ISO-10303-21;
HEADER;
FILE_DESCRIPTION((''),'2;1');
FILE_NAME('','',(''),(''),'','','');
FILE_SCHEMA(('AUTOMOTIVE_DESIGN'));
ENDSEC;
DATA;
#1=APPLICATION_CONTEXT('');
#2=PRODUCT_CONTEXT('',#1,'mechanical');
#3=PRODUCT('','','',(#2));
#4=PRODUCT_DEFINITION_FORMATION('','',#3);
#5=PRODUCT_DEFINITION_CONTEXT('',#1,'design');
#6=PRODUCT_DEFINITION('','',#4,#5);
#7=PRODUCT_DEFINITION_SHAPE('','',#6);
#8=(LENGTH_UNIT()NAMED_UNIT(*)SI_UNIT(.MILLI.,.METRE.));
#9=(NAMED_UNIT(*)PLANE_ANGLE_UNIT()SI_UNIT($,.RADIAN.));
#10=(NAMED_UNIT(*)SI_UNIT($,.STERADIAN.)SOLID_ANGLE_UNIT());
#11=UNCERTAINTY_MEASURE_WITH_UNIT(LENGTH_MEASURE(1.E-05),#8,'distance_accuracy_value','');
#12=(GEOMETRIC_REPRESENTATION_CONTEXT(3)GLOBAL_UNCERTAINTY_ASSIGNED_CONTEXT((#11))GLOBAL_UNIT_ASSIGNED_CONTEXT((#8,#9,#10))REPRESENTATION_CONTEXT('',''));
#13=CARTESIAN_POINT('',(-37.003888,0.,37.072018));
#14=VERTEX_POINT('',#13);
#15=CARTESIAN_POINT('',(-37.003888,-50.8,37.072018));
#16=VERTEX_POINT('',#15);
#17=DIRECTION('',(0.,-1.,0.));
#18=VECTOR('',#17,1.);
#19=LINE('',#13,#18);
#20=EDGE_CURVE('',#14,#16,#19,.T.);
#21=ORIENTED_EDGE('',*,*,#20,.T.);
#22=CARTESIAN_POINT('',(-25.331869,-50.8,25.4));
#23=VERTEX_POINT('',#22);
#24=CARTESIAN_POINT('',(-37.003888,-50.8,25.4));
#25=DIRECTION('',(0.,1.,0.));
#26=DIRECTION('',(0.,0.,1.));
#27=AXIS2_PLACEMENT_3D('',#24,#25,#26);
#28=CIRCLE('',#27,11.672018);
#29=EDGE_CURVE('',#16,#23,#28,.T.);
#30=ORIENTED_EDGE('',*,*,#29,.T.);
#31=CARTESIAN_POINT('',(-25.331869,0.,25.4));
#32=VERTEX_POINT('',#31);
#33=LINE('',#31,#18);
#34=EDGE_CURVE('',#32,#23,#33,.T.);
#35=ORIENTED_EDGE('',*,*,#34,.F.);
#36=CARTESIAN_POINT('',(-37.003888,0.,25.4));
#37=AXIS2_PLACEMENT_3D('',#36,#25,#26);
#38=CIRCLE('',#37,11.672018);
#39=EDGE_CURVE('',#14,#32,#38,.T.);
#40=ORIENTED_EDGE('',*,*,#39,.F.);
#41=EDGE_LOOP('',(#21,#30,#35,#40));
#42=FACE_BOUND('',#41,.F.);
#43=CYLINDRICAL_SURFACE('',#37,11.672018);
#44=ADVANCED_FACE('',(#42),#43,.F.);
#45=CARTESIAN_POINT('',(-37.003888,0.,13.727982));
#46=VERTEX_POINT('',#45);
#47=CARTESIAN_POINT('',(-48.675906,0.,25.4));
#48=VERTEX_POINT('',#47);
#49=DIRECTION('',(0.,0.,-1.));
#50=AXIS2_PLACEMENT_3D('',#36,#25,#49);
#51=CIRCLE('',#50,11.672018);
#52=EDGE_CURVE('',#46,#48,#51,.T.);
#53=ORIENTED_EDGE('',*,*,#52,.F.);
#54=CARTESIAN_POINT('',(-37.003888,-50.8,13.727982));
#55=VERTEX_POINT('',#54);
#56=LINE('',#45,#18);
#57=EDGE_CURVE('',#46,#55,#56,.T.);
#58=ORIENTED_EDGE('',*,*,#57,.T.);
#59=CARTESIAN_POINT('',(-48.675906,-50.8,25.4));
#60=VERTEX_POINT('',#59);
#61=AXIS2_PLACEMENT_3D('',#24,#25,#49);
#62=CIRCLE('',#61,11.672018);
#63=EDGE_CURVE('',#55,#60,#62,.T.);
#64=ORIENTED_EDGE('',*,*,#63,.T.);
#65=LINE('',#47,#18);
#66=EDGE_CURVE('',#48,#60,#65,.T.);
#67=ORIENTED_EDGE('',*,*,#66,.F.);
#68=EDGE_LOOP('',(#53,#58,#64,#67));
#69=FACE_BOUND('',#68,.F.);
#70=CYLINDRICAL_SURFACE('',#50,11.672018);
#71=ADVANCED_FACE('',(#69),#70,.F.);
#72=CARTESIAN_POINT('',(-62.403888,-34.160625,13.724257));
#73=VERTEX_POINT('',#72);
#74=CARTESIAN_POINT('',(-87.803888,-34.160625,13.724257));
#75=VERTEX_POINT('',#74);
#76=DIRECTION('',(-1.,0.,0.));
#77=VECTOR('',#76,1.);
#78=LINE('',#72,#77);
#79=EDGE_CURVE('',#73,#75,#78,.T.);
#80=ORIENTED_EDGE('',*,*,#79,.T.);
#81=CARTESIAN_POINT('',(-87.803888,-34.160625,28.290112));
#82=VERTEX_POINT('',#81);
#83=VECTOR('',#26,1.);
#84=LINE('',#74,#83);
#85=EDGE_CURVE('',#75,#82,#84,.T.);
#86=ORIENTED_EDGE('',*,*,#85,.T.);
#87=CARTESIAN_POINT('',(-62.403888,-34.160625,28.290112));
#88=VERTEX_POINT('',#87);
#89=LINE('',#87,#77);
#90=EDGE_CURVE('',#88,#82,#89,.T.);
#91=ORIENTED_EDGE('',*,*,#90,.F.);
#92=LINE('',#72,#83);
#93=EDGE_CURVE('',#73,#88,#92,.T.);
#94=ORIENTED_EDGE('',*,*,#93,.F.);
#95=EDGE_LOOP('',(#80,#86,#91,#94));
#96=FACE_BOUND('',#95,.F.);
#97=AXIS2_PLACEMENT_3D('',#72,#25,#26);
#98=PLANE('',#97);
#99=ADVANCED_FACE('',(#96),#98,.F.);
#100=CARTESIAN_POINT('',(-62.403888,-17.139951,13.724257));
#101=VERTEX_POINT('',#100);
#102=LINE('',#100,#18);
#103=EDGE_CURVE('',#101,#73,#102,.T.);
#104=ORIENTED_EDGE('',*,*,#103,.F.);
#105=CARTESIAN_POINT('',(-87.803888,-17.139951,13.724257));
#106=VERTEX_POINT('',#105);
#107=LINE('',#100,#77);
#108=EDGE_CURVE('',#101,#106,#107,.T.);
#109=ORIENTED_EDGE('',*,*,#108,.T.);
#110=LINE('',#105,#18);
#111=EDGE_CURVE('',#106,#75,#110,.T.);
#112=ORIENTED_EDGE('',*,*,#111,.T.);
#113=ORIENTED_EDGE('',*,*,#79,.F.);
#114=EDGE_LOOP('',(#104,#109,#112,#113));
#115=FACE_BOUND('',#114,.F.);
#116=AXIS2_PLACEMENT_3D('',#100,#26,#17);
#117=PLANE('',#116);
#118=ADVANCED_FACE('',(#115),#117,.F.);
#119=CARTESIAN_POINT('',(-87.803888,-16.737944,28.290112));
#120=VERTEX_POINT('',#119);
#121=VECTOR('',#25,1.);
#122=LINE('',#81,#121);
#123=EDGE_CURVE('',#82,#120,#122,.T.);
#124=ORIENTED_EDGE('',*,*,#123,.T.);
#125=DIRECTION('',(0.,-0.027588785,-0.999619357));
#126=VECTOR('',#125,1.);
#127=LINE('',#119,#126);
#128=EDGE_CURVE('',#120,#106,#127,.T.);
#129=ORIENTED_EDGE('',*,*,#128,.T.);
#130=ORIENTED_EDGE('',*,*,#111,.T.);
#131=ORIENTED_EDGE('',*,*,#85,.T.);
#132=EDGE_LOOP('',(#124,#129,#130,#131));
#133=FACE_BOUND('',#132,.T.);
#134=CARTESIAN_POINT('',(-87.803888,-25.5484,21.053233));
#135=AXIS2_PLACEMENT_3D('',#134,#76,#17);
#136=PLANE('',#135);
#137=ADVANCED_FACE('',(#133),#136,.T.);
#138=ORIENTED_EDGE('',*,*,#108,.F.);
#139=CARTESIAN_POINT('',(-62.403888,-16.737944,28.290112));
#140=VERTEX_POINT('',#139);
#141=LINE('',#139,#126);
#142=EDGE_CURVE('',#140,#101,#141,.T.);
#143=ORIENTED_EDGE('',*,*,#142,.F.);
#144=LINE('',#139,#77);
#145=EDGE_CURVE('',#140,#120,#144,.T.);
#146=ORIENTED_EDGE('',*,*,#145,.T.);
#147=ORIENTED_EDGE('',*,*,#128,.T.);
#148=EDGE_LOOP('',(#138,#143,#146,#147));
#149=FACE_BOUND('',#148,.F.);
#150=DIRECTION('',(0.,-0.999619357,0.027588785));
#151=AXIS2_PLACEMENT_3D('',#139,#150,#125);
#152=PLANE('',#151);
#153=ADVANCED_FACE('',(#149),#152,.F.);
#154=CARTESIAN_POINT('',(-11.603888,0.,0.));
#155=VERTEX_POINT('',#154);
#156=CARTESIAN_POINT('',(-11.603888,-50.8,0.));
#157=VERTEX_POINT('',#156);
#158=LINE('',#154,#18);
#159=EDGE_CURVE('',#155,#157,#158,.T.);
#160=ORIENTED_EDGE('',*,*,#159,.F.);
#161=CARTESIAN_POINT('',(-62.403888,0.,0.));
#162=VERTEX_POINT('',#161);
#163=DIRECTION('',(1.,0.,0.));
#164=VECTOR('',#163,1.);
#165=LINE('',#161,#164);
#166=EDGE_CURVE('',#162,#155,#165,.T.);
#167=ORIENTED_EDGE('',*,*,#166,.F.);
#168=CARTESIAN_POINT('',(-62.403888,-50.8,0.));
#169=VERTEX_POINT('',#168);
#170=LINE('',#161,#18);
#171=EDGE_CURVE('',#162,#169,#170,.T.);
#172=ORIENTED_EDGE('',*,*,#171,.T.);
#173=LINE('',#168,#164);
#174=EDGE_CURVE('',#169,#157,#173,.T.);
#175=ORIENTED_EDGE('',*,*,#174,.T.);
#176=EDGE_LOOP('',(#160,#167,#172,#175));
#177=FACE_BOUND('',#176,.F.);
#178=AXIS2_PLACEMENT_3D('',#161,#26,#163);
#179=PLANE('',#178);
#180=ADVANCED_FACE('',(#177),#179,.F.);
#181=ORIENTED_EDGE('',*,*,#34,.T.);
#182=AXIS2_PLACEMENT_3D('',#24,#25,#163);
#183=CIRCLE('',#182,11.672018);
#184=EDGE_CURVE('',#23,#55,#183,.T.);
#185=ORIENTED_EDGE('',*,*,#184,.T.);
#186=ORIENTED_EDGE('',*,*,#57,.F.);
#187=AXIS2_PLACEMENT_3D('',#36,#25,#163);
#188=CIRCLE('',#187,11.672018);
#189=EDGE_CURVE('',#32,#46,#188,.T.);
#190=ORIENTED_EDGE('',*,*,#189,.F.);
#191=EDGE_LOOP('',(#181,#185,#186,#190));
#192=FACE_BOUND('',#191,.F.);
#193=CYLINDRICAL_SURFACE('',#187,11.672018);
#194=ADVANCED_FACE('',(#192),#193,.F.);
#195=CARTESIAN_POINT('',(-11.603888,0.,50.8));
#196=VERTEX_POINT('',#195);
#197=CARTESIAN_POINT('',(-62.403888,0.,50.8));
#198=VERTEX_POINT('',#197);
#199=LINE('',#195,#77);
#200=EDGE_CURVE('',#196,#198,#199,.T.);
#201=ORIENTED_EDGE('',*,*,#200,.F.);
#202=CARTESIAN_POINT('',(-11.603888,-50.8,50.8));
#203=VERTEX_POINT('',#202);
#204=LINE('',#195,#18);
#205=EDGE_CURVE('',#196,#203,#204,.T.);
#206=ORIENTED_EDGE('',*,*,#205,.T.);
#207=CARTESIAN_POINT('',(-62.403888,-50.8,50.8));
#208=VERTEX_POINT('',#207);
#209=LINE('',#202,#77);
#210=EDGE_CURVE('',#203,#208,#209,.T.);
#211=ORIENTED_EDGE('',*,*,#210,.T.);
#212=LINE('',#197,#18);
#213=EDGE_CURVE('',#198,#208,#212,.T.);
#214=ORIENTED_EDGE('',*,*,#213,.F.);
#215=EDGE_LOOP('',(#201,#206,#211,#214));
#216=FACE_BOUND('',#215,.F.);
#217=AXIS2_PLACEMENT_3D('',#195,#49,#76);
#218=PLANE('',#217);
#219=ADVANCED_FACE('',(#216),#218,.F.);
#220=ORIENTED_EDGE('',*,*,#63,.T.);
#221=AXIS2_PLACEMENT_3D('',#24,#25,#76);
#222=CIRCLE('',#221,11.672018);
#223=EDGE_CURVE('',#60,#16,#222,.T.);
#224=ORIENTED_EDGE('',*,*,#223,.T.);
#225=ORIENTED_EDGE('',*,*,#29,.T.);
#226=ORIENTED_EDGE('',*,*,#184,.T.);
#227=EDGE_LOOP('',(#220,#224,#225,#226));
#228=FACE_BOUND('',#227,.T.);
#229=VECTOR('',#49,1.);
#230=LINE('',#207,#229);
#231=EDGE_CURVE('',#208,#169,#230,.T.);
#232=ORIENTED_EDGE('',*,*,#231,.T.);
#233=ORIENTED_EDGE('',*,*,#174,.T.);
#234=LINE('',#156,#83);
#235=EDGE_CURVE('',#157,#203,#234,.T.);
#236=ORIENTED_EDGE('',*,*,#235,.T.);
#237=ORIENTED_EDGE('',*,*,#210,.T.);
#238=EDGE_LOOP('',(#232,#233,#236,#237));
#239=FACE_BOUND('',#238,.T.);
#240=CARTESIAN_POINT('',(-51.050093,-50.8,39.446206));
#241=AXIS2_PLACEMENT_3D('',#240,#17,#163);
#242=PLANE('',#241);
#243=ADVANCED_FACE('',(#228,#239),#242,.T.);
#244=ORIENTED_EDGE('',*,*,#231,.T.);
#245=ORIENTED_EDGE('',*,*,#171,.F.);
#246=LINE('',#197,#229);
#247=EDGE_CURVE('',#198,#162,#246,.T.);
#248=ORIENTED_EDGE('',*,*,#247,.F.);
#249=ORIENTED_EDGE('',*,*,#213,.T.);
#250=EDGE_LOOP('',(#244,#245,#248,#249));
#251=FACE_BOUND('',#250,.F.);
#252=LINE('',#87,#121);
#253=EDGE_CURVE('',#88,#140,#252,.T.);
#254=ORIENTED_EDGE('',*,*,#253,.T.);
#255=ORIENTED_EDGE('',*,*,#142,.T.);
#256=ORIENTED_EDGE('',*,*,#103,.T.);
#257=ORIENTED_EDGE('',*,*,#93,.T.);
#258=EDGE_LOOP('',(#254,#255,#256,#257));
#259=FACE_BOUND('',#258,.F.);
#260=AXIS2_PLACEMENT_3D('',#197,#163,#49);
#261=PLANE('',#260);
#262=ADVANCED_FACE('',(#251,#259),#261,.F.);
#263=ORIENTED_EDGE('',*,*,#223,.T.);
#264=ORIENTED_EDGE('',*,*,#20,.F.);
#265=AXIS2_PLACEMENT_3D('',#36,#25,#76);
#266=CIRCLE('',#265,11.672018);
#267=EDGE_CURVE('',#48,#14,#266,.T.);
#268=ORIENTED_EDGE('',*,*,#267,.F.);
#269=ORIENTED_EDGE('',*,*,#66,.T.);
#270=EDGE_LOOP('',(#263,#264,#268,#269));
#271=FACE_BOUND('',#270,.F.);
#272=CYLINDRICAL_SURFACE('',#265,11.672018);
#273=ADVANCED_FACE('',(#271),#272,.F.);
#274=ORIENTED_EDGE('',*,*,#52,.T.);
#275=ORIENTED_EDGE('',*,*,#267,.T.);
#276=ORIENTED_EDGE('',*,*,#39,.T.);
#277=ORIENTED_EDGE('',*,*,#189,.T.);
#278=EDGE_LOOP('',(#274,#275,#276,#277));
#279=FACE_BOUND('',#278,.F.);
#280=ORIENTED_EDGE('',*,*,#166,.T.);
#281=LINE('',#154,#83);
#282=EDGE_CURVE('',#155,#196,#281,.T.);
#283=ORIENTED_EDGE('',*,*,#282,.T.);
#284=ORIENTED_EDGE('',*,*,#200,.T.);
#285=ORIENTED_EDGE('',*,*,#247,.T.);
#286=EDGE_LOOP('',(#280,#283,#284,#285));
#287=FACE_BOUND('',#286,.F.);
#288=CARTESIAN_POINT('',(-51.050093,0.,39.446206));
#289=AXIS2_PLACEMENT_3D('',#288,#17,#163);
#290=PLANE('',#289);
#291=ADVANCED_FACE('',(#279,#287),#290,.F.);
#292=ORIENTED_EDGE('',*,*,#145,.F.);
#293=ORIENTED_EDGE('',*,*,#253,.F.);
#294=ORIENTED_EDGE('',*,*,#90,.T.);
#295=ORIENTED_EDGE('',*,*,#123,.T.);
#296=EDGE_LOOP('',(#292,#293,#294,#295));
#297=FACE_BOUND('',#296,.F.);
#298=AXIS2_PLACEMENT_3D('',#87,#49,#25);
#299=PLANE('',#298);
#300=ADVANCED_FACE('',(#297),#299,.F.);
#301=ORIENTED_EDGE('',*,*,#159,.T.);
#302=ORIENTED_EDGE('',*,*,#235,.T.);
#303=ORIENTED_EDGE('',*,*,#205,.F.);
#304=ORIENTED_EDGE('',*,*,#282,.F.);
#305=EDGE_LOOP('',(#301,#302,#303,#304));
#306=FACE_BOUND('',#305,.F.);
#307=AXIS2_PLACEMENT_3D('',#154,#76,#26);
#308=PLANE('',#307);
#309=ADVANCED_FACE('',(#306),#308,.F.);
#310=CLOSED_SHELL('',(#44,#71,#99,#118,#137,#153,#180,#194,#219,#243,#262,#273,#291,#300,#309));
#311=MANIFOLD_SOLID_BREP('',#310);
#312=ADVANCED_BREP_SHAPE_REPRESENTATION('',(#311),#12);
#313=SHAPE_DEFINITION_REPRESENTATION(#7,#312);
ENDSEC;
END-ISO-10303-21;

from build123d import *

# Parameters (mm, degrees)
F1_DEPTH = 50.8
F3_DEPTH = 25.4


# Not quite as in the source:
# - a feature names something its author has since deleted; it is built from what else it names


with BuildPart() as f1:
    # F0 (on Front) → F1 (new body)
    with BuildSketch(Plane.XZ):
        with BuildLine():
            Line((-37.0038875103, 50.8), (-62.4038875103, 50.8))
            Line((-62.4038875103, 50.8), (-62.4038875103, 25.4))
            Line((-62.4038875103, 25.4), (-48.6759059699, 25.4))
            ThreePointArc((-48.6759059699, 25.4), (-45.2572509132, 33.6533634029), (-37.0038875103, 37.0720184596))
            Line((-37.0038875103, 37.0720184596), (-37.0038875103, 50.8))
        make_face()
        with BuildLine():
            Line((-48.6759059699, 25.4), (-62.4038875103, 25.4))
            Line((-62.4038875103, 25.4), (-62.4038875103, 0))
            Line((-62.4038875103, 0), (-37.0038875103, 0))
            Line((-37.0038875103, 0), (-37.0038875103, 13.7279815404))
            ThreePointArc((-37.0038875103, 13.7279815404), (-45.2572509132, 17.1466365971), (-48.6759059699, 25.4))
        make_face()
        with BuildLine():
            Line((-11.6038875103, 50.8), (-37.0038875103, 50.8))
            Line((-37.0038875103, 50.8), (-37.0038875103, 37.0720184596))
            ThreePointArc((-37.0038875103, 37.0720184596), (-28.7505241074, 33.6533634029), (-25.3318690507, 25.4))
            Line((-25.3318690507, 25.4), (-11.6038875103, 25.4))
            Line((-11.6038875103, 25.4), (-11.6038875103, 50.8))
        make_face()
        with BuildLine():
            Line((-37.0038875103, 13.7279815404), (-37.0038875103, 0))
            Line((-37.0038875103, 0), (-11.6038875103, 0))
            Line((-11.6038875103, 0), (-11.6038875103, 25.4))
            Line((-11.6038875103, 25.4), (-25.3318690507, 25.4))
            ThreePointArc((-25.3318690507, 25.4), (-28.7505241074, 17.1466365971), (-37.0038875103, 13.7279815404))
        make_face()
    extrude(amount=F1_DEPTH)

    # F2 (on face) → F3 (join)
    with BuildSketch(Plane(origin=(-62.4038875103, 0, 0), x_dir=(0, -1, 0), z_dir=(-1, 0, 0))):
        Polygon((16.7379435152, 28.2901115716), (17.1399507672, 13.7242572382), (34.1606251895, 13.7242572382), (34.1606251895, 28.2901115716), align=None)
    extrude(amount=F3_DEPTH)


solid = f1.part
